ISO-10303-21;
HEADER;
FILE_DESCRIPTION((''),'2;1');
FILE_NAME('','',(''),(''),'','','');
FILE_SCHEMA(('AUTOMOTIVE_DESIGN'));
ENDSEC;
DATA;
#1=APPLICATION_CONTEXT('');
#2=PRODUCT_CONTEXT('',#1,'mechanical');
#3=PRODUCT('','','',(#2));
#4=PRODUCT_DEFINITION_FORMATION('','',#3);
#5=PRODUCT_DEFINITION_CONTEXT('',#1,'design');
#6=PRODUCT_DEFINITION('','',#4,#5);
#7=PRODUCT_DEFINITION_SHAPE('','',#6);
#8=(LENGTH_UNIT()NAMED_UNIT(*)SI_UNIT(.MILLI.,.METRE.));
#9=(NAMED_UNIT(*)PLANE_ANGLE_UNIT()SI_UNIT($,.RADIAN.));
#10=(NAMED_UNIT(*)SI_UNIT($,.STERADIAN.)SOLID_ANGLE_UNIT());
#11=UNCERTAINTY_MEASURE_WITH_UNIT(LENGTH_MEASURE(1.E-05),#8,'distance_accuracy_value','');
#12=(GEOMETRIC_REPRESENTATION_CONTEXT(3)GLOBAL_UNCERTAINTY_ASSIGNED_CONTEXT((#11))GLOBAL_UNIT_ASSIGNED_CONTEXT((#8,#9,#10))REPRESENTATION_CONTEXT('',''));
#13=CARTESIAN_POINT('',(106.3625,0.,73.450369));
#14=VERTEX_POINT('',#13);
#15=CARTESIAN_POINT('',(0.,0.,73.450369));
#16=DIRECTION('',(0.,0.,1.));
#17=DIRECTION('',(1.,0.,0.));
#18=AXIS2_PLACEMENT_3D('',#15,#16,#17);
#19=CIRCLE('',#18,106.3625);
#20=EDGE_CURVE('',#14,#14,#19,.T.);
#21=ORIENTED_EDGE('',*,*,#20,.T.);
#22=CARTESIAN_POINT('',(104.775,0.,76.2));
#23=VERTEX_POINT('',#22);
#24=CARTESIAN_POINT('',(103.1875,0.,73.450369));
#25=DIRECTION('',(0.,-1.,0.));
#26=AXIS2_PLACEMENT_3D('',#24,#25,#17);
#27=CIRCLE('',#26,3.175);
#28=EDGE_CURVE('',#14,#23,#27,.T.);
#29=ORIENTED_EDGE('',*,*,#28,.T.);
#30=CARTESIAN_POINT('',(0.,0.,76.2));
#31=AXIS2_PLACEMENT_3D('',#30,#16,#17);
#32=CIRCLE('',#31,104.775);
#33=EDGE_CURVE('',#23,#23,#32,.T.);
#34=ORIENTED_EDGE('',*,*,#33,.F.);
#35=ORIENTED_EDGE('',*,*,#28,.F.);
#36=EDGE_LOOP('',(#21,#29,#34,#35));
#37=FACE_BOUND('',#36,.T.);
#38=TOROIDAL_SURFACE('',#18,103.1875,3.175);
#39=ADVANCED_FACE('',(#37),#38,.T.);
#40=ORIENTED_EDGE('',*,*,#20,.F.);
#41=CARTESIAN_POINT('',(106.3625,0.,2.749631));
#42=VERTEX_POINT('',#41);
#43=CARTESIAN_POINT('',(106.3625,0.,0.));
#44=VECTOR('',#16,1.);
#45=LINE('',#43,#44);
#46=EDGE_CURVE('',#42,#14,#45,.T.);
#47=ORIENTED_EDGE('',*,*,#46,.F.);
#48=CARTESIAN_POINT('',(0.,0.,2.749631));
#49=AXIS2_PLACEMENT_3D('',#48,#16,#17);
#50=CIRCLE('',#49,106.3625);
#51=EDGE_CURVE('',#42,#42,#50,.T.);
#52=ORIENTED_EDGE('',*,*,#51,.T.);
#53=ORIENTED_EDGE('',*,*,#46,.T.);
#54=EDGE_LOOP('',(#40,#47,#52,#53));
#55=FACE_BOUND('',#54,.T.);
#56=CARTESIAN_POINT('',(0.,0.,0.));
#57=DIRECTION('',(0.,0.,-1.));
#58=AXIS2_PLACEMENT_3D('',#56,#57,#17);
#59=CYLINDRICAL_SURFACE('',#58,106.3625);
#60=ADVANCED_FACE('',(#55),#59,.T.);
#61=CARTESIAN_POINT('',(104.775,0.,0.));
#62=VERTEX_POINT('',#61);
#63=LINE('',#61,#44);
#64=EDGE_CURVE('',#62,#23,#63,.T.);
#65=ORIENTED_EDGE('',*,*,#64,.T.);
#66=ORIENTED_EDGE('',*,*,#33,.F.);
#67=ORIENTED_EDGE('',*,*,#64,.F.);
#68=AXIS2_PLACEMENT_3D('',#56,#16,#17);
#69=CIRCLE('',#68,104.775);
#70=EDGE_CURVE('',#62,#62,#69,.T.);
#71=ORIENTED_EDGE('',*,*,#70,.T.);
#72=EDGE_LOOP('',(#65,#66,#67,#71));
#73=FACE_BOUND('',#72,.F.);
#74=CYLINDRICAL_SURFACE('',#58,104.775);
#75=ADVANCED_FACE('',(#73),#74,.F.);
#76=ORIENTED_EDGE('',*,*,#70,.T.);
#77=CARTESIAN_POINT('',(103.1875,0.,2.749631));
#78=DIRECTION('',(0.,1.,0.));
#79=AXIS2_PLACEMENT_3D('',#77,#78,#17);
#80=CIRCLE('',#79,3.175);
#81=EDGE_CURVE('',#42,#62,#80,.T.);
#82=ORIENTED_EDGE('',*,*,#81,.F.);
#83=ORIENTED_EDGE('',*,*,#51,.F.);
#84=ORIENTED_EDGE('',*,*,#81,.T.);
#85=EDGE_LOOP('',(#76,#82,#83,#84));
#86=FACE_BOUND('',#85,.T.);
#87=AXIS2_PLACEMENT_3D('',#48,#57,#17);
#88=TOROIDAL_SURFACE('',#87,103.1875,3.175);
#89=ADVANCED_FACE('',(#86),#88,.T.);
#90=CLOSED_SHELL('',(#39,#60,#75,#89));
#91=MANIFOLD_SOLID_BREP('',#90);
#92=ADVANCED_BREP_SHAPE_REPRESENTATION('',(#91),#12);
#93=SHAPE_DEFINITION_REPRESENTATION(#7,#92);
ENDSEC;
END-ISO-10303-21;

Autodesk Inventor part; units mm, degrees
ref_plane "YZ Plane" through (0, 0, 0) normal (1, 0, 0) x (0, 1, 0)
ref_plane "XZ Plane" through (0, 0, 0) normal (0, 1, 0) x (-1, 0, 0)
ref_plane "XY Plane" through (0, 0, 0) normal (0, 0, 1) x (1, 0, 0)
sketch "Sketch1" plane through (0, 0, 0) normal (0, 0, 1) x (1, 0, 0)
  circle A0 centre (0, 0) radius 104.775
  circle A1 centre (0, 0) radius 106.3625
  dimension "d0" = 1.5875
  dimension "d1" = 209.55
extrude "Extrusion1" add sketch "Sketch1" along normal blind 76.2
fillet "Fillet1" radius 3.175 2 edges at (-106.3625, 0, 76.2) (-106.3625, 0, 0)
properties part number "Duct_Outer"
